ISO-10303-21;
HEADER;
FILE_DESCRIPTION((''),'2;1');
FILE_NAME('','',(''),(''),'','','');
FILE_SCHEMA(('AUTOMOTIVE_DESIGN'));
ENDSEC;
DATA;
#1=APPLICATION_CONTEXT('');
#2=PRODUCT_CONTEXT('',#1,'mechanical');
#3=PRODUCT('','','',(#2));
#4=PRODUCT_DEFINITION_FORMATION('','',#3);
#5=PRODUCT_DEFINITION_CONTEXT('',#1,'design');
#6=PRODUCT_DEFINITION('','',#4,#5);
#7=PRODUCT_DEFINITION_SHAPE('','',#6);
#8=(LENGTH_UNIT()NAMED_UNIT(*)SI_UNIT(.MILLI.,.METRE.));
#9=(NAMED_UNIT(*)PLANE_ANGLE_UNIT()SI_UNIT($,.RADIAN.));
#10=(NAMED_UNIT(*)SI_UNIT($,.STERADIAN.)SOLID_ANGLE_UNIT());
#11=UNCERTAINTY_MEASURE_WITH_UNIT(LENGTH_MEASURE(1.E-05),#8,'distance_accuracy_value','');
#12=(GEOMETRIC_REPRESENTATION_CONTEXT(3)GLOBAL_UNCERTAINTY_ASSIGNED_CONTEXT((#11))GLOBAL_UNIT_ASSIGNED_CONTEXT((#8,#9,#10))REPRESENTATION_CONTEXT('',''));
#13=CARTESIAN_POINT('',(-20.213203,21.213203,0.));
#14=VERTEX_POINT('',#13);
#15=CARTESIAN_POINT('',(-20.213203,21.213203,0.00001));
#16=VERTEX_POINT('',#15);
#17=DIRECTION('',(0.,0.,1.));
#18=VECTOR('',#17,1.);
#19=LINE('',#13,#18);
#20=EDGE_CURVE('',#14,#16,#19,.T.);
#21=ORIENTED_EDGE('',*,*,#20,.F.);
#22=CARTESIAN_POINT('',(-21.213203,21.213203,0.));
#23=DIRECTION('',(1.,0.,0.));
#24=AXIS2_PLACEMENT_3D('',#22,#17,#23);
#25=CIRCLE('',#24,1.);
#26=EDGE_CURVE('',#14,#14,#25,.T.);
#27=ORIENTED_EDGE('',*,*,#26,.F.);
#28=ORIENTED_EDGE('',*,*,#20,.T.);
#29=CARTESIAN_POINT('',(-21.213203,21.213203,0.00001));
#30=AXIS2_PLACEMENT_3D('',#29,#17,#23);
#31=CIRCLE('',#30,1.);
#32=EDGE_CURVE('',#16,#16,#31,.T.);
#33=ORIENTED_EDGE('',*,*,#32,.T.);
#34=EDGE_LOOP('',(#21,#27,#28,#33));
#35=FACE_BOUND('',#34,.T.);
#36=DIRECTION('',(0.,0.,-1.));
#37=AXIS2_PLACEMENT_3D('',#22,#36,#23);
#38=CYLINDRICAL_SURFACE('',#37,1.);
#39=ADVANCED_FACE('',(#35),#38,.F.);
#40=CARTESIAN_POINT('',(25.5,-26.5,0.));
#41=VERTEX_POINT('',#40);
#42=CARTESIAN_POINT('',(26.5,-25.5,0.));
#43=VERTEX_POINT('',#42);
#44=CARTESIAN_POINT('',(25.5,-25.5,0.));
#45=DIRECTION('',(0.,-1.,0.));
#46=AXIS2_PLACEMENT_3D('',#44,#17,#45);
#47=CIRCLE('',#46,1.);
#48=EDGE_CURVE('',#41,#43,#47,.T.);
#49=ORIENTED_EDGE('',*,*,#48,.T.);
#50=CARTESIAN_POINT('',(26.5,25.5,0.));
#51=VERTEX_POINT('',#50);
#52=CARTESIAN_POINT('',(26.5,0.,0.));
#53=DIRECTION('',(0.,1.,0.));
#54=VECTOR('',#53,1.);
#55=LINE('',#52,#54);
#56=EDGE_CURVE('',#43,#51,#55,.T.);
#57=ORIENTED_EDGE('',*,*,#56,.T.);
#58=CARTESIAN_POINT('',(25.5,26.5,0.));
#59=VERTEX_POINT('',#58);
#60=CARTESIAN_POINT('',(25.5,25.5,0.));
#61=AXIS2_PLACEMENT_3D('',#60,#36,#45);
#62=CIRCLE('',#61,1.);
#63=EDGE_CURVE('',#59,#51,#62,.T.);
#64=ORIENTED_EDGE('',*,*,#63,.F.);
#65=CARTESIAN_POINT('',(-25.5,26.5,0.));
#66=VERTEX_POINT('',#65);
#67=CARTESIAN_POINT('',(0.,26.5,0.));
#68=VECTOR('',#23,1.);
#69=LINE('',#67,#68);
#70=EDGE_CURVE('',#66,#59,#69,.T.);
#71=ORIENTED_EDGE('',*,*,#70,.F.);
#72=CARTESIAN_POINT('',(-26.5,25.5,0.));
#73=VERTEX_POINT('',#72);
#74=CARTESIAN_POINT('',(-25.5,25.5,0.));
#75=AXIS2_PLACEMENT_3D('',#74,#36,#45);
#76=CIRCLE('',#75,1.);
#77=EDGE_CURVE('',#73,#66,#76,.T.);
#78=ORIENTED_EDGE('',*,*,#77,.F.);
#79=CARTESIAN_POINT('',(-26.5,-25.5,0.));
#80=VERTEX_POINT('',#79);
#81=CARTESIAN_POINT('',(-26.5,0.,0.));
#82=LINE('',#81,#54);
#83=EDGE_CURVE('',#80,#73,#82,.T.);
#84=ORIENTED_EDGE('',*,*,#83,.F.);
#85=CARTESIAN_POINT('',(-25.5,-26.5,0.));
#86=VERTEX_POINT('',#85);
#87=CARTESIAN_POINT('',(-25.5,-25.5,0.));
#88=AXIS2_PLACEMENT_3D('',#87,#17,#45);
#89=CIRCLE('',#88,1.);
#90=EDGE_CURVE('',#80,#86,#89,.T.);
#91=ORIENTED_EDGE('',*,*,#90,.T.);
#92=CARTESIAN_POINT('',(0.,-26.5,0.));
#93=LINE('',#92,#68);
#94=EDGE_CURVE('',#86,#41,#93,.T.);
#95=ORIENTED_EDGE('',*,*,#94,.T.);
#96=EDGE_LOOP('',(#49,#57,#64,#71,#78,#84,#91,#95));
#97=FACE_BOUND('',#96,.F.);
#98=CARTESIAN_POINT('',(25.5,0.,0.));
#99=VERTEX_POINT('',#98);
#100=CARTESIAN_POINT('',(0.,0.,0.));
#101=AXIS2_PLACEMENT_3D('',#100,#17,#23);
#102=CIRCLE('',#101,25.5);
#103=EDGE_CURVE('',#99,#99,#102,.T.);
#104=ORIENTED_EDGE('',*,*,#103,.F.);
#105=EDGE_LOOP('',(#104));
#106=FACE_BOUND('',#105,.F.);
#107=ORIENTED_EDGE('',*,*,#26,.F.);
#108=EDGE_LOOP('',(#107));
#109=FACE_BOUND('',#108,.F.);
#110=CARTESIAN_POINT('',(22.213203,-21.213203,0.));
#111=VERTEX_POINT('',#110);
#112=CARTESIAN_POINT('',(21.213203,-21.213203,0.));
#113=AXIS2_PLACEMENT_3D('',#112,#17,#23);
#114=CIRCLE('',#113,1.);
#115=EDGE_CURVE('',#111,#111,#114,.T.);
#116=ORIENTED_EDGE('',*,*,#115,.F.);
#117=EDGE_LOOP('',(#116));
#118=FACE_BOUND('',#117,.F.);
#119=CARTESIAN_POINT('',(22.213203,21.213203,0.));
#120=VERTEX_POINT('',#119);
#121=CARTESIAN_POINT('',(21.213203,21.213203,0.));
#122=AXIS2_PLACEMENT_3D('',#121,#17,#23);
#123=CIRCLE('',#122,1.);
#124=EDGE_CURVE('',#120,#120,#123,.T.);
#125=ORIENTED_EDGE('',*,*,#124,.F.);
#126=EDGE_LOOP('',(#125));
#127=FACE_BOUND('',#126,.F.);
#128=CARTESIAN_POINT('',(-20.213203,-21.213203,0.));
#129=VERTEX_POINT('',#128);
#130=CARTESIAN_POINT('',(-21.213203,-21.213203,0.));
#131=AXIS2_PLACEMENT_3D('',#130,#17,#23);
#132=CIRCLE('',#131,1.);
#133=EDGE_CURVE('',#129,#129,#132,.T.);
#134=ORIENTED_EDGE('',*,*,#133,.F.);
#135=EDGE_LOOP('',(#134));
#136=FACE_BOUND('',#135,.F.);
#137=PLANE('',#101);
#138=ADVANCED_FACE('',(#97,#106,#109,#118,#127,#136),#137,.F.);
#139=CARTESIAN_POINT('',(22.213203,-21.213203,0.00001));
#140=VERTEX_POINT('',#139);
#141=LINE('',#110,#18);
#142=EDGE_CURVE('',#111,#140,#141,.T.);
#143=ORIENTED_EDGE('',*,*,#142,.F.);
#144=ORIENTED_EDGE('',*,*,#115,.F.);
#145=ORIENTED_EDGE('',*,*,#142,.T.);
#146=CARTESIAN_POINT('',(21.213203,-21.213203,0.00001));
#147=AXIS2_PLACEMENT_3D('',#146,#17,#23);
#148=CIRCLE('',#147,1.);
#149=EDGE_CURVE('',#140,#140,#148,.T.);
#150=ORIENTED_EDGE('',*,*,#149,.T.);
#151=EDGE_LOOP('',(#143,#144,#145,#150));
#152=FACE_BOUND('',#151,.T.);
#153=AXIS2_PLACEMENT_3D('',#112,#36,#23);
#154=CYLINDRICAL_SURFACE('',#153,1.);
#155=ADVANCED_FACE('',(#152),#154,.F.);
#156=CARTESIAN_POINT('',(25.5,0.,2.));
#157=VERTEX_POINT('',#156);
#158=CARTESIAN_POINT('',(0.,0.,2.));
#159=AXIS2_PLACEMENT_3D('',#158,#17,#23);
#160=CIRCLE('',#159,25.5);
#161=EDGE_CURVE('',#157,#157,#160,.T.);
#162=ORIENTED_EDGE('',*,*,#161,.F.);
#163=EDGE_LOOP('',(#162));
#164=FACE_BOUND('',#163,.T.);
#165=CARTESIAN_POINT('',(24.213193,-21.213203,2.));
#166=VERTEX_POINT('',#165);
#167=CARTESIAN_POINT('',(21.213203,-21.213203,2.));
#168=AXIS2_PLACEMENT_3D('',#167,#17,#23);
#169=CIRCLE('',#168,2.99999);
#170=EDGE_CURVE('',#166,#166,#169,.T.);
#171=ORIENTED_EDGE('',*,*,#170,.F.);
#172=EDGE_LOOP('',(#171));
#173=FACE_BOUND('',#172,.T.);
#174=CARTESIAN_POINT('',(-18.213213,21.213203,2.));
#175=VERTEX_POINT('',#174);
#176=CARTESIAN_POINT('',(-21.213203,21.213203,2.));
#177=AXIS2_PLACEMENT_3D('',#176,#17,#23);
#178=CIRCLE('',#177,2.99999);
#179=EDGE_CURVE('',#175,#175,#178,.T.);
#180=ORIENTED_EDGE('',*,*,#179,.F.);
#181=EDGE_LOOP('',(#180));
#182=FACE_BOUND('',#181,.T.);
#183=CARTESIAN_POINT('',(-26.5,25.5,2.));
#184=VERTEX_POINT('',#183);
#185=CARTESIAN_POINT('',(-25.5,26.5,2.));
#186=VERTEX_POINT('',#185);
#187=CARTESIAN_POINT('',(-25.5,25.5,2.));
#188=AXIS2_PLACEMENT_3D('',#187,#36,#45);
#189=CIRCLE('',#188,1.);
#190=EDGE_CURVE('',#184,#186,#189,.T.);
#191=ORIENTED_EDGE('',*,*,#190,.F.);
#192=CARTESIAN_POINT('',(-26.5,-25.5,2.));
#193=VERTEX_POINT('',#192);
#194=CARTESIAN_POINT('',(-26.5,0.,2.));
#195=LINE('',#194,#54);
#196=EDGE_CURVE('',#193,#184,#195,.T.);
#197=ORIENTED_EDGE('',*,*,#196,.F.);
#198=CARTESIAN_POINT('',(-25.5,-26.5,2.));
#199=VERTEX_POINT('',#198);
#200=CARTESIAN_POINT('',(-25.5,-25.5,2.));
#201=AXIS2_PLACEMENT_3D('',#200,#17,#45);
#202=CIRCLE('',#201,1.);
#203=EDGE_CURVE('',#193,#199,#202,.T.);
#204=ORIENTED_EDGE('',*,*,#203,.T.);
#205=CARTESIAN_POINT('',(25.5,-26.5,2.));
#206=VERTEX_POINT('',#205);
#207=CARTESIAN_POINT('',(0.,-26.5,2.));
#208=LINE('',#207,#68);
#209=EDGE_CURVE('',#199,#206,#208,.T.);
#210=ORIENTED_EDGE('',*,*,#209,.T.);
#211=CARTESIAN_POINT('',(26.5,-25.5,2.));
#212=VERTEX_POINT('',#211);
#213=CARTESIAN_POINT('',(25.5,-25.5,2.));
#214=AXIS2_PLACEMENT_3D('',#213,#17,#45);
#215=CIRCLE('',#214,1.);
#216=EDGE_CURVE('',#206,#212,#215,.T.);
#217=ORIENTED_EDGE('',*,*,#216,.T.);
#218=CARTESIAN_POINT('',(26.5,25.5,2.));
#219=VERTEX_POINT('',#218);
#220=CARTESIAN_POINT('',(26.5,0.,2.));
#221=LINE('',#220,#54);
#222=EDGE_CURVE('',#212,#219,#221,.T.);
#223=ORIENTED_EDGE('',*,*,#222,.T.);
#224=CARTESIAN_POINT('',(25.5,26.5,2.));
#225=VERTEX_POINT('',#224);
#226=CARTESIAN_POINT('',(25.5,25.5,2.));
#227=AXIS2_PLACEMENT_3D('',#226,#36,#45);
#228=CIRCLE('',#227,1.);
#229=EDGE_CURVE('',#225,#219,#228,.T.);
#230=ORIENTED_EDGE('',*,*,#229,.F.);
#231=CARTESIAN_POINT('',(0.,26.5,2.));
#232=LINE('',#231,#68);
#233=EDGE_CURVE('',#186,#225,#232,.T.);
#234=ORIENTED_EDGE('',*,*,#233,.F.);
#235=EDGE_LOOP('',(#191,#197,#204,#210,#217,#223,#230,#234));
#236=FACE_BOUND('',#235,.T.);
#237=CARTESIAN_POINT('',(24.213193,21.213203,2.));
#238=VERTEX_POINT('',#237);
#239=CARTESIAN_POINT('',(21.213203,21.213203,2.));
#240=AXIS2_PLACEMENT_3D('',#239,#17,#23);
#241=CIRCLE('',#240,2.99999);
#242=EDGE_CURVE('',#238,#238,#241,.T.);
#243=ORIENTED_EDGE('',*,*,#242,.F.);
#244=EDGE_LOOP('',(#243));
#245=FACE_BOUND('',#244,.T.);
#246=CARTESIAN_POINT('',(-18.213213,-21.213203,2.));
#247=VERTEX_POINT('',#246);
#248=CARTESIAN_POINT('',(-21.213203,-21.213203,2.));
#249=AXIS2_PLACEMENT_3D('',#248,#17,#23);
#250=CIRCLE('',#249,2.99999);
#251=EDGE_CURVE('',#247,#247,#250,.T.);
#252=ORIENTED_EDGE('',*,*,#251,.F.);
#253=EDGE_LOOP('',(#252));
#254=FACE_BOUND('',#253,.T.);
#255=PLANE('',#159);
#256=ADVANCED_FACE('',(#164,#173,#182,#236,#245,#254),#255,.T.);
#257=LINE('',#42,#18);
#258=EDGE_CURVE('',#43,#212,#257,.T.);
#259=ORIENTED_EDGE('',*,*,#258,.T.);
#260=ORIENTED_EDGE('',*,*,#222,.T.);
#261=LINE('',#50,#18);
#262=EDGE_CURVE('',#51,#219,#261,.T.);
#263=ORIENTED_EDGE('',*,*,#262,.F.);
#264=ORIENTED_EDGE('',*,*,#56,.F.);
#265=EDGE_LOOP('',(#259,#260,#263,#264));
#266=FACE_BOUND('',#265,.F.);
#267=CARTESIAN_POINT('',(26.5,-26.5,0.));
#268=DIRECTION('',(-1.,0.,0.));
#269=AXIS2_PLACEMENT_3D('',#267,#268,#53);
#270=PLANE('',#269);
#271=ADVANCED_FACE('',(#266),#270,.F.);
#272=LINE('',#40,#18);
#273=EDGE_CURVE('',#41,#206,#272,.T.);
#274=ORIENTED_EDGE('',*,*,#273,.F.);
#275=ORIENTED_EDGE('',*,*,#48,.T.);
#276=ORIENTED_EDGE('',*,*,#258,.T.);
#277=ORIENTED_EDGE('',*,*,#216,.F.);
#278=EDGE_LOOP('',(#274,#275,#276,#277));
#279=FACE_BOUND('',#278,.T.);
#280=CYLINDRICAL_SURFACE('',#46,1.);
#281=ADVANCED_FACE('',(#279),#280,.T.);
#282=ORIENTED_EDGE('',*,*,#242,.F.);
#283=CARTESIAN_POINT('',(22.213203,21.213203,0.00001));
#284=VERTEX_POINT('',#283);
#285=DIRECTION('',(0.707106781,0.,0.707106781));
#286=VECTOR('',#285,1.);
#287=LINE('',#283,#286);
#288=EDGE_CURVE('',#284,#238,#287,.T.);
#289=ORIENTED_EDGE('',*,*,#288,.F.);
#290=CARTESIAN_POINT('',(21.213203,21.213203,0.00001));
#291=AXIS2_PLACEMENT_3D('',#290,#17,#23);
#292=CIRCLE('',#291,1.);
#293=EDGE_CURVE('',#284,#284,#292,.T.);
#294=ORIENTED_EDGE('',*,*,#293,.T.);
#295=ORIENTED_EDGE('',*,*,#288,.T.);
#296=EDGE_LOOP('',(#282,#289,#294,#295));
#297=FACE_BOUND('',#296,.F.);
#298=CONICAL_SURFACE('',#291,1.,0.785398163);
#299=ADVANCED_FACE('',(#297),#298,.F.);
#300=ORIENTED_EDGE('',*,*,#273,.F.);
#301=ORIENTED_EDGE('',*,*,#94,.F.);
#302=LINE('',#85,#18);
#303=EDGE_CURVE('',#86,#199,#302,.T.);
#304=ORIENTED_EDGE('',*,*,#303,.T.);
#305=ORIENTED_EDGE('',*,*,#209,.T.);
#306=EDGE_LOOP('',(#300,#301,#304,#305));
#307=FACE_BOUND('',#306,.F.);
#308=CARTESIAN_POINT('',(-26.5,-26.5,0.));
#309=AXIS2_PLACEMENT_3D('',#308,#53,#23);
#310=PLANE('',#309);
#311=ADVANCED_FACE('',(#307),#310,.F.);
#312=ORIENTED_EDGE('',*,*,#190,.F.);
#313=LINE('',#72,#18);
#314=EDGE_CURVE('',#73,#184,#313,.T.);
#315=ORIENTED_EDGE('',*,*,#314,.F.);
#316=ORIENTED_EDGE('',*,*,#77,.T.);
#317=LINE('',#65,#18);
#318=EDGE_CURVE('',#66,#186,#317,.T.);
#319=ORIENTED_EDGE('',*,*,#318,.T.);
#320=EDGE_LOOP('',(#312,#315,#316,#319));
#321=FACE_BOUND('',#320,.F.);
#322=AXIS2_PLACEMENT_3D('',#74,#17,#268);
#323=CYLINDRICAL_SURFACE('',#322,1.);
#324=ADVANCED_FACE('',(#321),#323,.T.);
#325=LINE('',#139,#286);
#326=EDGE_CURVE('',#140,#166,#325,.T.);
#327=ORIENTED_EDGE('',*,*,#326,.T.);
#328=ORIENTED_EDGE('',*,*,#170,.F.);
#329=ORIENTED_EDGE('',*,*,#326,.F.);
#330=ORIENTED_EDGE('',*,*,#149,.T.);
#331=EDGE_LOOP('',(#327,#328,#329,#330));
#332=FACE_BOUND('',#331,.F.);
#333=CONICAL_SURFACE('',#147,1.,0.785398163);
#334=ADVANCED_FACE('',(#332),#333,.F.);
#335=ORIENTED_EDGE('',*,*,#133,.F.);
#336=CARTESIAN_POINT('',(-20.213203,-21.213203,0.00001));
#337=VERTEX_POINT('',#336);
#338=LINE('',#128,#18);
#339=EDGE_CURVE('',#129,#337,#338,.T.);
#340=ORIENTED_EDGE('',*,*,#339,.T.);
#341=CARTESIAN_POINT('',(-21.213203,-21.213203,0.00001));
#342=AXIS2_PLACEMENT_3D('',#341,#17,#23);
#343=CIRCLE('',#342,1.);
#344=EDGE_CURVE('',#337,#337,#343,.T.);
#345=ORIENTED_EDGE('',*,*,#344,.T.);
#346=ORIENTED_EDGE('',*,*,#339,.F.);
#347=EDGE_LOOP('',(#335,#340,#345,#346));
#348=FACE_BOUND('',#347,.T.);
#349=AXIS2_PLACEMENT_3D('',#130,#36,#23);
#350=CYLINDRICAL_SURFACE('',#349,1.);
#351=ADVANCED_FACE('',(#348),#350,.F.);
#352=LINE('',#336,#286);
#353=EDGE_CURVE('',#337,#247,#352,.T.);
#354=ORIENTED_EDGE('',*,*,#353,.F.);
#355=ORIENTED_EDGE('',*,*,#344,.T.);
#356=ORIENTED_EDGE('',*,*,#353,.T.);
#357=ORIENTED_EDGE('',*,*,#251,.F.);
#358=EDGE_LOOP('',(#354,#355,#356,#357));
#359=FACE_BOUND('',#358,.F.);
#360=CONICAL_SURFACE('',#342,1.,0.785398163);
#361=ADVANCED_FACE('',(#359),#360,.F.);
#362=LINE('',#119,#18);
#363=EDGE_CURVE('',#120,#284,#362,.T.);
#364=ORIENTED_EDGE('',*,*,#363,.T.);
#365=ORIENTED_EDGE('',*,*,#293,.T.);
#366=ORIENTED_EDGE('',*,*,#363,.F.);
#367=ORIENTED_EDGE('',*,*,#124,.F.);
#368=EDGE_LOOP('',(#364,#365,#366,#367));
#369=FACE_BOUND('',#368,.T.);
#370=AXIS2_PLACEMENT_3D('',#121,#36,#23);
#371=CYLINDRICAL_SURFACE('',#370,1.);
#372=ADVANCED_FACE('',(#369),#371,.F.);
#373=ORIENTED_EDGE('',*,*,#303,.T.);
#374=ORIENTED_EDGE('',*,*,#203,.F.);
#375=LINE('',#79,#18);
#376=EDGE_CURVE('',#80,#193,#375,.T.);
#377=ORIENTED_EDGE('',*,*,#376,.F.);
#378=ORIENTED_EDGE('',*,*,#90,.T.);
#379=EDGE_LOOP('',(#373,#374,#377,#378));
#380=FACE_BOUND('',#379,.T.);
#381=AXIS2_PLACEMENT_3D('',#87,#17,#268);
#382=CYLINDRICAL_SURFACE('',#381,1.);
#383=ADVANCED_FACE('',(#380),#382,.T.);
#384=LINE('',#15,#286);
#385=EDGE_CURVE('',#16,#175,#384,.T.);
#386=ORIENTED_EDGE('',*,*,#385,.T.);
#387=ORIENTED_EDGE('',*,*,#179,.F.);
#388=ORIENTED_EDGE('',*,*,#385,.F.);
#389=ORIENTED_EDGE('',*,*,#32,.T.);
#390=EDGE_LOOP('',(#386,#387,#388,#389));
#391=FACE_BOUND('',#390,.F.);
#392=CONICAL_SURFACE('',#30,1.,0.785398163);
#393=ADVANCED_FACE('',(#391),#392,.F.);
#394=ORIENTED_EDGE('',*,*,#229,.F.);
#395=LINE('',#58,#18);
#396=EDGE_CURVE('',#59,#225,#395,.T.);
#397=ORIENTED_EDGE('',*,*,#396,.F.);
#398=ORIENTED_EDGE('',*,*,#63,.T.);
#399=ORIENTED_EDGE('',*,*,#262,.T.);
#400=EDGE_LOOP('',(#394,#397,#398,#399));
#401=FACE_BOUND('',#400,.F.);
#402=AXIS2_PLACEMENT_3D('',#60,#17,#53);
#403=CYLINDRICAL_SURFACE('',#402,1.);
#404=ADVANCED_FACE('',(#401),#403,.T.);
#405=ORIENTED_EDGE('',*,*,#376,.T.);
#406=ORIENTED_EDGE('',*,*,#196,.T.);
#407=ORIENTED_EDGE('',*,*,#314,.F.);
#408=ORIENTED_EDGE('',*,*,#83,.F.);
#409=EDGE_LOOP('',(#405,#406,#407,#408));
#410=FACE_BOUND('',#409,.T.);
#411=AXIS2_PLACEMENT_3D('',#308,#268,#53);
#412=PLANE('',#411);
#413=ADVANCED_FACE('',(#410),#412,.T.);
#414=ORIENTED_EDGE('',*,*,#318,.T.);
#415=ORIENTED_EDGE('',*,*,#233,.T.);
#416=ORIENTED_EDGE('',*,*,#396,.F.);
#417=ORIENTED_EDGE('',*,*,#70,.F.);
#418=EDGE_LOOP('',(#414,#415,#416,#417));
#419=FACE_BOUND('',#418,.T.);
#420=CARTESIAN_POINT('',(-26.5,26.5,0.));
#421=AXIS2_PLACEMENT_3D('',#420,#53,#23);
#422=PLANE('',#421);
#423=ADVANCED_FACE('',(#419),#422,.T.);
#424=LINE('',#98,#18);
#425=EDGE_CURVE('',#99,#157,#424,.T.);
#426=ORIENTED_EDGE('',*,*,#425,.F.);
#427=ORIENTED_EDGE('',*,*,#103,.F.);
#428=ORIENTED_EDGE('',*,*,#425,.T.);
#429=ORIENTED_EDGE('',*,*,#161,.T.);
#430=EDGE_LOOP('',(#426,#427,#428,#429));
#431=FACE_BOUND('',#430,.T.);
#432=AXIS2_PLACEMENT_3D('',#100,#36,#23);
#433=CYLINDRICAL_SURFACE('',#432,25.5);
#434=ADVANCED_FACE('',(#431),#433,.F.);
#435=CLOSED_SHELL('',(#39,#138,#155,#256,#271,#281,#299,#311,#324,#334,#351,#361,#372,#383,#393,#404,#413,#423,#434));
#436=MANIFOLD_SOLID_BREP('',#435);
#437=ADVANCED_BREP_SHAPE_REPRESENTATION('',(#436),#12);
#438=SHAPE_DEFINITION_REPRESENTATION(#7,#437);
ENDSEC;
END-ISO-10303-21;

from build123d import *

# Parameters (mm, degrees)
F0_W     = 53
F0_H     = 53
F0_R     = 1
F0_R_2   = 25.5
F1_DEPTH = 2
F2_SIZE  = 1.99999
F3_R     = 1


# Not quite as in the source:
# - a fillet or chamfer is up to 0.001 mm smaller than in the source, because OpenCascade refuses the exact size


with BuildPart() as f1:
    # F0 (on Top) → F1 (new body)
    with BuildSketch(Plane.XY):
        Rectangle(F0_W, F0_H)
        with Locations((-21.2132034356, -21.2132034356)):
            Circle(F0_R, mode=Mode.SUBTRACT)
        with Locations((21.2132034356, -21.2132034356)):
            Circle(F0_R, mode=Mode.SUBTRACT)
        with Locations((-21.2132034356, 21.2132034356)):
            Circle(F0_R, mode=Mode.SUBTRACT)
        Circle(F0_R_2, mode=Mode.SUBTRACT)
        with Locations((21.2132034356, 21.2132034356)):
            Circle(F0_R, mode=Mode.SUBTRACT)
    extrude(amount=F1_DEPTH)

    # F2 (size 2 in the source; OpenCascade refuses exactly that, so slightly less here)
    f2_edges = [f1.edges().sort_by_distance(p)[0] for p in [
        (-22.213203, 21.213203, 2),
        (20.213203, 21.213203, 2),
        (20.213203, -21.213203, 2),
        (-22.213203, -21.213203, 2),
    ]]
    chamfer(f2_edges, length=F2_SIZE)

    # F3
    f3_edges = [f1.edges().sort_by_distance(p)[0] for p in [
        (26.5, -26.5, 1),
        (26.5, 26.5, 1),
        (-26.5, -26.5, 1),
        (-26.5, 26.5, 1),
    ]]
    fillet(f3_edges, radius=F3_R)


solid = f1.part
